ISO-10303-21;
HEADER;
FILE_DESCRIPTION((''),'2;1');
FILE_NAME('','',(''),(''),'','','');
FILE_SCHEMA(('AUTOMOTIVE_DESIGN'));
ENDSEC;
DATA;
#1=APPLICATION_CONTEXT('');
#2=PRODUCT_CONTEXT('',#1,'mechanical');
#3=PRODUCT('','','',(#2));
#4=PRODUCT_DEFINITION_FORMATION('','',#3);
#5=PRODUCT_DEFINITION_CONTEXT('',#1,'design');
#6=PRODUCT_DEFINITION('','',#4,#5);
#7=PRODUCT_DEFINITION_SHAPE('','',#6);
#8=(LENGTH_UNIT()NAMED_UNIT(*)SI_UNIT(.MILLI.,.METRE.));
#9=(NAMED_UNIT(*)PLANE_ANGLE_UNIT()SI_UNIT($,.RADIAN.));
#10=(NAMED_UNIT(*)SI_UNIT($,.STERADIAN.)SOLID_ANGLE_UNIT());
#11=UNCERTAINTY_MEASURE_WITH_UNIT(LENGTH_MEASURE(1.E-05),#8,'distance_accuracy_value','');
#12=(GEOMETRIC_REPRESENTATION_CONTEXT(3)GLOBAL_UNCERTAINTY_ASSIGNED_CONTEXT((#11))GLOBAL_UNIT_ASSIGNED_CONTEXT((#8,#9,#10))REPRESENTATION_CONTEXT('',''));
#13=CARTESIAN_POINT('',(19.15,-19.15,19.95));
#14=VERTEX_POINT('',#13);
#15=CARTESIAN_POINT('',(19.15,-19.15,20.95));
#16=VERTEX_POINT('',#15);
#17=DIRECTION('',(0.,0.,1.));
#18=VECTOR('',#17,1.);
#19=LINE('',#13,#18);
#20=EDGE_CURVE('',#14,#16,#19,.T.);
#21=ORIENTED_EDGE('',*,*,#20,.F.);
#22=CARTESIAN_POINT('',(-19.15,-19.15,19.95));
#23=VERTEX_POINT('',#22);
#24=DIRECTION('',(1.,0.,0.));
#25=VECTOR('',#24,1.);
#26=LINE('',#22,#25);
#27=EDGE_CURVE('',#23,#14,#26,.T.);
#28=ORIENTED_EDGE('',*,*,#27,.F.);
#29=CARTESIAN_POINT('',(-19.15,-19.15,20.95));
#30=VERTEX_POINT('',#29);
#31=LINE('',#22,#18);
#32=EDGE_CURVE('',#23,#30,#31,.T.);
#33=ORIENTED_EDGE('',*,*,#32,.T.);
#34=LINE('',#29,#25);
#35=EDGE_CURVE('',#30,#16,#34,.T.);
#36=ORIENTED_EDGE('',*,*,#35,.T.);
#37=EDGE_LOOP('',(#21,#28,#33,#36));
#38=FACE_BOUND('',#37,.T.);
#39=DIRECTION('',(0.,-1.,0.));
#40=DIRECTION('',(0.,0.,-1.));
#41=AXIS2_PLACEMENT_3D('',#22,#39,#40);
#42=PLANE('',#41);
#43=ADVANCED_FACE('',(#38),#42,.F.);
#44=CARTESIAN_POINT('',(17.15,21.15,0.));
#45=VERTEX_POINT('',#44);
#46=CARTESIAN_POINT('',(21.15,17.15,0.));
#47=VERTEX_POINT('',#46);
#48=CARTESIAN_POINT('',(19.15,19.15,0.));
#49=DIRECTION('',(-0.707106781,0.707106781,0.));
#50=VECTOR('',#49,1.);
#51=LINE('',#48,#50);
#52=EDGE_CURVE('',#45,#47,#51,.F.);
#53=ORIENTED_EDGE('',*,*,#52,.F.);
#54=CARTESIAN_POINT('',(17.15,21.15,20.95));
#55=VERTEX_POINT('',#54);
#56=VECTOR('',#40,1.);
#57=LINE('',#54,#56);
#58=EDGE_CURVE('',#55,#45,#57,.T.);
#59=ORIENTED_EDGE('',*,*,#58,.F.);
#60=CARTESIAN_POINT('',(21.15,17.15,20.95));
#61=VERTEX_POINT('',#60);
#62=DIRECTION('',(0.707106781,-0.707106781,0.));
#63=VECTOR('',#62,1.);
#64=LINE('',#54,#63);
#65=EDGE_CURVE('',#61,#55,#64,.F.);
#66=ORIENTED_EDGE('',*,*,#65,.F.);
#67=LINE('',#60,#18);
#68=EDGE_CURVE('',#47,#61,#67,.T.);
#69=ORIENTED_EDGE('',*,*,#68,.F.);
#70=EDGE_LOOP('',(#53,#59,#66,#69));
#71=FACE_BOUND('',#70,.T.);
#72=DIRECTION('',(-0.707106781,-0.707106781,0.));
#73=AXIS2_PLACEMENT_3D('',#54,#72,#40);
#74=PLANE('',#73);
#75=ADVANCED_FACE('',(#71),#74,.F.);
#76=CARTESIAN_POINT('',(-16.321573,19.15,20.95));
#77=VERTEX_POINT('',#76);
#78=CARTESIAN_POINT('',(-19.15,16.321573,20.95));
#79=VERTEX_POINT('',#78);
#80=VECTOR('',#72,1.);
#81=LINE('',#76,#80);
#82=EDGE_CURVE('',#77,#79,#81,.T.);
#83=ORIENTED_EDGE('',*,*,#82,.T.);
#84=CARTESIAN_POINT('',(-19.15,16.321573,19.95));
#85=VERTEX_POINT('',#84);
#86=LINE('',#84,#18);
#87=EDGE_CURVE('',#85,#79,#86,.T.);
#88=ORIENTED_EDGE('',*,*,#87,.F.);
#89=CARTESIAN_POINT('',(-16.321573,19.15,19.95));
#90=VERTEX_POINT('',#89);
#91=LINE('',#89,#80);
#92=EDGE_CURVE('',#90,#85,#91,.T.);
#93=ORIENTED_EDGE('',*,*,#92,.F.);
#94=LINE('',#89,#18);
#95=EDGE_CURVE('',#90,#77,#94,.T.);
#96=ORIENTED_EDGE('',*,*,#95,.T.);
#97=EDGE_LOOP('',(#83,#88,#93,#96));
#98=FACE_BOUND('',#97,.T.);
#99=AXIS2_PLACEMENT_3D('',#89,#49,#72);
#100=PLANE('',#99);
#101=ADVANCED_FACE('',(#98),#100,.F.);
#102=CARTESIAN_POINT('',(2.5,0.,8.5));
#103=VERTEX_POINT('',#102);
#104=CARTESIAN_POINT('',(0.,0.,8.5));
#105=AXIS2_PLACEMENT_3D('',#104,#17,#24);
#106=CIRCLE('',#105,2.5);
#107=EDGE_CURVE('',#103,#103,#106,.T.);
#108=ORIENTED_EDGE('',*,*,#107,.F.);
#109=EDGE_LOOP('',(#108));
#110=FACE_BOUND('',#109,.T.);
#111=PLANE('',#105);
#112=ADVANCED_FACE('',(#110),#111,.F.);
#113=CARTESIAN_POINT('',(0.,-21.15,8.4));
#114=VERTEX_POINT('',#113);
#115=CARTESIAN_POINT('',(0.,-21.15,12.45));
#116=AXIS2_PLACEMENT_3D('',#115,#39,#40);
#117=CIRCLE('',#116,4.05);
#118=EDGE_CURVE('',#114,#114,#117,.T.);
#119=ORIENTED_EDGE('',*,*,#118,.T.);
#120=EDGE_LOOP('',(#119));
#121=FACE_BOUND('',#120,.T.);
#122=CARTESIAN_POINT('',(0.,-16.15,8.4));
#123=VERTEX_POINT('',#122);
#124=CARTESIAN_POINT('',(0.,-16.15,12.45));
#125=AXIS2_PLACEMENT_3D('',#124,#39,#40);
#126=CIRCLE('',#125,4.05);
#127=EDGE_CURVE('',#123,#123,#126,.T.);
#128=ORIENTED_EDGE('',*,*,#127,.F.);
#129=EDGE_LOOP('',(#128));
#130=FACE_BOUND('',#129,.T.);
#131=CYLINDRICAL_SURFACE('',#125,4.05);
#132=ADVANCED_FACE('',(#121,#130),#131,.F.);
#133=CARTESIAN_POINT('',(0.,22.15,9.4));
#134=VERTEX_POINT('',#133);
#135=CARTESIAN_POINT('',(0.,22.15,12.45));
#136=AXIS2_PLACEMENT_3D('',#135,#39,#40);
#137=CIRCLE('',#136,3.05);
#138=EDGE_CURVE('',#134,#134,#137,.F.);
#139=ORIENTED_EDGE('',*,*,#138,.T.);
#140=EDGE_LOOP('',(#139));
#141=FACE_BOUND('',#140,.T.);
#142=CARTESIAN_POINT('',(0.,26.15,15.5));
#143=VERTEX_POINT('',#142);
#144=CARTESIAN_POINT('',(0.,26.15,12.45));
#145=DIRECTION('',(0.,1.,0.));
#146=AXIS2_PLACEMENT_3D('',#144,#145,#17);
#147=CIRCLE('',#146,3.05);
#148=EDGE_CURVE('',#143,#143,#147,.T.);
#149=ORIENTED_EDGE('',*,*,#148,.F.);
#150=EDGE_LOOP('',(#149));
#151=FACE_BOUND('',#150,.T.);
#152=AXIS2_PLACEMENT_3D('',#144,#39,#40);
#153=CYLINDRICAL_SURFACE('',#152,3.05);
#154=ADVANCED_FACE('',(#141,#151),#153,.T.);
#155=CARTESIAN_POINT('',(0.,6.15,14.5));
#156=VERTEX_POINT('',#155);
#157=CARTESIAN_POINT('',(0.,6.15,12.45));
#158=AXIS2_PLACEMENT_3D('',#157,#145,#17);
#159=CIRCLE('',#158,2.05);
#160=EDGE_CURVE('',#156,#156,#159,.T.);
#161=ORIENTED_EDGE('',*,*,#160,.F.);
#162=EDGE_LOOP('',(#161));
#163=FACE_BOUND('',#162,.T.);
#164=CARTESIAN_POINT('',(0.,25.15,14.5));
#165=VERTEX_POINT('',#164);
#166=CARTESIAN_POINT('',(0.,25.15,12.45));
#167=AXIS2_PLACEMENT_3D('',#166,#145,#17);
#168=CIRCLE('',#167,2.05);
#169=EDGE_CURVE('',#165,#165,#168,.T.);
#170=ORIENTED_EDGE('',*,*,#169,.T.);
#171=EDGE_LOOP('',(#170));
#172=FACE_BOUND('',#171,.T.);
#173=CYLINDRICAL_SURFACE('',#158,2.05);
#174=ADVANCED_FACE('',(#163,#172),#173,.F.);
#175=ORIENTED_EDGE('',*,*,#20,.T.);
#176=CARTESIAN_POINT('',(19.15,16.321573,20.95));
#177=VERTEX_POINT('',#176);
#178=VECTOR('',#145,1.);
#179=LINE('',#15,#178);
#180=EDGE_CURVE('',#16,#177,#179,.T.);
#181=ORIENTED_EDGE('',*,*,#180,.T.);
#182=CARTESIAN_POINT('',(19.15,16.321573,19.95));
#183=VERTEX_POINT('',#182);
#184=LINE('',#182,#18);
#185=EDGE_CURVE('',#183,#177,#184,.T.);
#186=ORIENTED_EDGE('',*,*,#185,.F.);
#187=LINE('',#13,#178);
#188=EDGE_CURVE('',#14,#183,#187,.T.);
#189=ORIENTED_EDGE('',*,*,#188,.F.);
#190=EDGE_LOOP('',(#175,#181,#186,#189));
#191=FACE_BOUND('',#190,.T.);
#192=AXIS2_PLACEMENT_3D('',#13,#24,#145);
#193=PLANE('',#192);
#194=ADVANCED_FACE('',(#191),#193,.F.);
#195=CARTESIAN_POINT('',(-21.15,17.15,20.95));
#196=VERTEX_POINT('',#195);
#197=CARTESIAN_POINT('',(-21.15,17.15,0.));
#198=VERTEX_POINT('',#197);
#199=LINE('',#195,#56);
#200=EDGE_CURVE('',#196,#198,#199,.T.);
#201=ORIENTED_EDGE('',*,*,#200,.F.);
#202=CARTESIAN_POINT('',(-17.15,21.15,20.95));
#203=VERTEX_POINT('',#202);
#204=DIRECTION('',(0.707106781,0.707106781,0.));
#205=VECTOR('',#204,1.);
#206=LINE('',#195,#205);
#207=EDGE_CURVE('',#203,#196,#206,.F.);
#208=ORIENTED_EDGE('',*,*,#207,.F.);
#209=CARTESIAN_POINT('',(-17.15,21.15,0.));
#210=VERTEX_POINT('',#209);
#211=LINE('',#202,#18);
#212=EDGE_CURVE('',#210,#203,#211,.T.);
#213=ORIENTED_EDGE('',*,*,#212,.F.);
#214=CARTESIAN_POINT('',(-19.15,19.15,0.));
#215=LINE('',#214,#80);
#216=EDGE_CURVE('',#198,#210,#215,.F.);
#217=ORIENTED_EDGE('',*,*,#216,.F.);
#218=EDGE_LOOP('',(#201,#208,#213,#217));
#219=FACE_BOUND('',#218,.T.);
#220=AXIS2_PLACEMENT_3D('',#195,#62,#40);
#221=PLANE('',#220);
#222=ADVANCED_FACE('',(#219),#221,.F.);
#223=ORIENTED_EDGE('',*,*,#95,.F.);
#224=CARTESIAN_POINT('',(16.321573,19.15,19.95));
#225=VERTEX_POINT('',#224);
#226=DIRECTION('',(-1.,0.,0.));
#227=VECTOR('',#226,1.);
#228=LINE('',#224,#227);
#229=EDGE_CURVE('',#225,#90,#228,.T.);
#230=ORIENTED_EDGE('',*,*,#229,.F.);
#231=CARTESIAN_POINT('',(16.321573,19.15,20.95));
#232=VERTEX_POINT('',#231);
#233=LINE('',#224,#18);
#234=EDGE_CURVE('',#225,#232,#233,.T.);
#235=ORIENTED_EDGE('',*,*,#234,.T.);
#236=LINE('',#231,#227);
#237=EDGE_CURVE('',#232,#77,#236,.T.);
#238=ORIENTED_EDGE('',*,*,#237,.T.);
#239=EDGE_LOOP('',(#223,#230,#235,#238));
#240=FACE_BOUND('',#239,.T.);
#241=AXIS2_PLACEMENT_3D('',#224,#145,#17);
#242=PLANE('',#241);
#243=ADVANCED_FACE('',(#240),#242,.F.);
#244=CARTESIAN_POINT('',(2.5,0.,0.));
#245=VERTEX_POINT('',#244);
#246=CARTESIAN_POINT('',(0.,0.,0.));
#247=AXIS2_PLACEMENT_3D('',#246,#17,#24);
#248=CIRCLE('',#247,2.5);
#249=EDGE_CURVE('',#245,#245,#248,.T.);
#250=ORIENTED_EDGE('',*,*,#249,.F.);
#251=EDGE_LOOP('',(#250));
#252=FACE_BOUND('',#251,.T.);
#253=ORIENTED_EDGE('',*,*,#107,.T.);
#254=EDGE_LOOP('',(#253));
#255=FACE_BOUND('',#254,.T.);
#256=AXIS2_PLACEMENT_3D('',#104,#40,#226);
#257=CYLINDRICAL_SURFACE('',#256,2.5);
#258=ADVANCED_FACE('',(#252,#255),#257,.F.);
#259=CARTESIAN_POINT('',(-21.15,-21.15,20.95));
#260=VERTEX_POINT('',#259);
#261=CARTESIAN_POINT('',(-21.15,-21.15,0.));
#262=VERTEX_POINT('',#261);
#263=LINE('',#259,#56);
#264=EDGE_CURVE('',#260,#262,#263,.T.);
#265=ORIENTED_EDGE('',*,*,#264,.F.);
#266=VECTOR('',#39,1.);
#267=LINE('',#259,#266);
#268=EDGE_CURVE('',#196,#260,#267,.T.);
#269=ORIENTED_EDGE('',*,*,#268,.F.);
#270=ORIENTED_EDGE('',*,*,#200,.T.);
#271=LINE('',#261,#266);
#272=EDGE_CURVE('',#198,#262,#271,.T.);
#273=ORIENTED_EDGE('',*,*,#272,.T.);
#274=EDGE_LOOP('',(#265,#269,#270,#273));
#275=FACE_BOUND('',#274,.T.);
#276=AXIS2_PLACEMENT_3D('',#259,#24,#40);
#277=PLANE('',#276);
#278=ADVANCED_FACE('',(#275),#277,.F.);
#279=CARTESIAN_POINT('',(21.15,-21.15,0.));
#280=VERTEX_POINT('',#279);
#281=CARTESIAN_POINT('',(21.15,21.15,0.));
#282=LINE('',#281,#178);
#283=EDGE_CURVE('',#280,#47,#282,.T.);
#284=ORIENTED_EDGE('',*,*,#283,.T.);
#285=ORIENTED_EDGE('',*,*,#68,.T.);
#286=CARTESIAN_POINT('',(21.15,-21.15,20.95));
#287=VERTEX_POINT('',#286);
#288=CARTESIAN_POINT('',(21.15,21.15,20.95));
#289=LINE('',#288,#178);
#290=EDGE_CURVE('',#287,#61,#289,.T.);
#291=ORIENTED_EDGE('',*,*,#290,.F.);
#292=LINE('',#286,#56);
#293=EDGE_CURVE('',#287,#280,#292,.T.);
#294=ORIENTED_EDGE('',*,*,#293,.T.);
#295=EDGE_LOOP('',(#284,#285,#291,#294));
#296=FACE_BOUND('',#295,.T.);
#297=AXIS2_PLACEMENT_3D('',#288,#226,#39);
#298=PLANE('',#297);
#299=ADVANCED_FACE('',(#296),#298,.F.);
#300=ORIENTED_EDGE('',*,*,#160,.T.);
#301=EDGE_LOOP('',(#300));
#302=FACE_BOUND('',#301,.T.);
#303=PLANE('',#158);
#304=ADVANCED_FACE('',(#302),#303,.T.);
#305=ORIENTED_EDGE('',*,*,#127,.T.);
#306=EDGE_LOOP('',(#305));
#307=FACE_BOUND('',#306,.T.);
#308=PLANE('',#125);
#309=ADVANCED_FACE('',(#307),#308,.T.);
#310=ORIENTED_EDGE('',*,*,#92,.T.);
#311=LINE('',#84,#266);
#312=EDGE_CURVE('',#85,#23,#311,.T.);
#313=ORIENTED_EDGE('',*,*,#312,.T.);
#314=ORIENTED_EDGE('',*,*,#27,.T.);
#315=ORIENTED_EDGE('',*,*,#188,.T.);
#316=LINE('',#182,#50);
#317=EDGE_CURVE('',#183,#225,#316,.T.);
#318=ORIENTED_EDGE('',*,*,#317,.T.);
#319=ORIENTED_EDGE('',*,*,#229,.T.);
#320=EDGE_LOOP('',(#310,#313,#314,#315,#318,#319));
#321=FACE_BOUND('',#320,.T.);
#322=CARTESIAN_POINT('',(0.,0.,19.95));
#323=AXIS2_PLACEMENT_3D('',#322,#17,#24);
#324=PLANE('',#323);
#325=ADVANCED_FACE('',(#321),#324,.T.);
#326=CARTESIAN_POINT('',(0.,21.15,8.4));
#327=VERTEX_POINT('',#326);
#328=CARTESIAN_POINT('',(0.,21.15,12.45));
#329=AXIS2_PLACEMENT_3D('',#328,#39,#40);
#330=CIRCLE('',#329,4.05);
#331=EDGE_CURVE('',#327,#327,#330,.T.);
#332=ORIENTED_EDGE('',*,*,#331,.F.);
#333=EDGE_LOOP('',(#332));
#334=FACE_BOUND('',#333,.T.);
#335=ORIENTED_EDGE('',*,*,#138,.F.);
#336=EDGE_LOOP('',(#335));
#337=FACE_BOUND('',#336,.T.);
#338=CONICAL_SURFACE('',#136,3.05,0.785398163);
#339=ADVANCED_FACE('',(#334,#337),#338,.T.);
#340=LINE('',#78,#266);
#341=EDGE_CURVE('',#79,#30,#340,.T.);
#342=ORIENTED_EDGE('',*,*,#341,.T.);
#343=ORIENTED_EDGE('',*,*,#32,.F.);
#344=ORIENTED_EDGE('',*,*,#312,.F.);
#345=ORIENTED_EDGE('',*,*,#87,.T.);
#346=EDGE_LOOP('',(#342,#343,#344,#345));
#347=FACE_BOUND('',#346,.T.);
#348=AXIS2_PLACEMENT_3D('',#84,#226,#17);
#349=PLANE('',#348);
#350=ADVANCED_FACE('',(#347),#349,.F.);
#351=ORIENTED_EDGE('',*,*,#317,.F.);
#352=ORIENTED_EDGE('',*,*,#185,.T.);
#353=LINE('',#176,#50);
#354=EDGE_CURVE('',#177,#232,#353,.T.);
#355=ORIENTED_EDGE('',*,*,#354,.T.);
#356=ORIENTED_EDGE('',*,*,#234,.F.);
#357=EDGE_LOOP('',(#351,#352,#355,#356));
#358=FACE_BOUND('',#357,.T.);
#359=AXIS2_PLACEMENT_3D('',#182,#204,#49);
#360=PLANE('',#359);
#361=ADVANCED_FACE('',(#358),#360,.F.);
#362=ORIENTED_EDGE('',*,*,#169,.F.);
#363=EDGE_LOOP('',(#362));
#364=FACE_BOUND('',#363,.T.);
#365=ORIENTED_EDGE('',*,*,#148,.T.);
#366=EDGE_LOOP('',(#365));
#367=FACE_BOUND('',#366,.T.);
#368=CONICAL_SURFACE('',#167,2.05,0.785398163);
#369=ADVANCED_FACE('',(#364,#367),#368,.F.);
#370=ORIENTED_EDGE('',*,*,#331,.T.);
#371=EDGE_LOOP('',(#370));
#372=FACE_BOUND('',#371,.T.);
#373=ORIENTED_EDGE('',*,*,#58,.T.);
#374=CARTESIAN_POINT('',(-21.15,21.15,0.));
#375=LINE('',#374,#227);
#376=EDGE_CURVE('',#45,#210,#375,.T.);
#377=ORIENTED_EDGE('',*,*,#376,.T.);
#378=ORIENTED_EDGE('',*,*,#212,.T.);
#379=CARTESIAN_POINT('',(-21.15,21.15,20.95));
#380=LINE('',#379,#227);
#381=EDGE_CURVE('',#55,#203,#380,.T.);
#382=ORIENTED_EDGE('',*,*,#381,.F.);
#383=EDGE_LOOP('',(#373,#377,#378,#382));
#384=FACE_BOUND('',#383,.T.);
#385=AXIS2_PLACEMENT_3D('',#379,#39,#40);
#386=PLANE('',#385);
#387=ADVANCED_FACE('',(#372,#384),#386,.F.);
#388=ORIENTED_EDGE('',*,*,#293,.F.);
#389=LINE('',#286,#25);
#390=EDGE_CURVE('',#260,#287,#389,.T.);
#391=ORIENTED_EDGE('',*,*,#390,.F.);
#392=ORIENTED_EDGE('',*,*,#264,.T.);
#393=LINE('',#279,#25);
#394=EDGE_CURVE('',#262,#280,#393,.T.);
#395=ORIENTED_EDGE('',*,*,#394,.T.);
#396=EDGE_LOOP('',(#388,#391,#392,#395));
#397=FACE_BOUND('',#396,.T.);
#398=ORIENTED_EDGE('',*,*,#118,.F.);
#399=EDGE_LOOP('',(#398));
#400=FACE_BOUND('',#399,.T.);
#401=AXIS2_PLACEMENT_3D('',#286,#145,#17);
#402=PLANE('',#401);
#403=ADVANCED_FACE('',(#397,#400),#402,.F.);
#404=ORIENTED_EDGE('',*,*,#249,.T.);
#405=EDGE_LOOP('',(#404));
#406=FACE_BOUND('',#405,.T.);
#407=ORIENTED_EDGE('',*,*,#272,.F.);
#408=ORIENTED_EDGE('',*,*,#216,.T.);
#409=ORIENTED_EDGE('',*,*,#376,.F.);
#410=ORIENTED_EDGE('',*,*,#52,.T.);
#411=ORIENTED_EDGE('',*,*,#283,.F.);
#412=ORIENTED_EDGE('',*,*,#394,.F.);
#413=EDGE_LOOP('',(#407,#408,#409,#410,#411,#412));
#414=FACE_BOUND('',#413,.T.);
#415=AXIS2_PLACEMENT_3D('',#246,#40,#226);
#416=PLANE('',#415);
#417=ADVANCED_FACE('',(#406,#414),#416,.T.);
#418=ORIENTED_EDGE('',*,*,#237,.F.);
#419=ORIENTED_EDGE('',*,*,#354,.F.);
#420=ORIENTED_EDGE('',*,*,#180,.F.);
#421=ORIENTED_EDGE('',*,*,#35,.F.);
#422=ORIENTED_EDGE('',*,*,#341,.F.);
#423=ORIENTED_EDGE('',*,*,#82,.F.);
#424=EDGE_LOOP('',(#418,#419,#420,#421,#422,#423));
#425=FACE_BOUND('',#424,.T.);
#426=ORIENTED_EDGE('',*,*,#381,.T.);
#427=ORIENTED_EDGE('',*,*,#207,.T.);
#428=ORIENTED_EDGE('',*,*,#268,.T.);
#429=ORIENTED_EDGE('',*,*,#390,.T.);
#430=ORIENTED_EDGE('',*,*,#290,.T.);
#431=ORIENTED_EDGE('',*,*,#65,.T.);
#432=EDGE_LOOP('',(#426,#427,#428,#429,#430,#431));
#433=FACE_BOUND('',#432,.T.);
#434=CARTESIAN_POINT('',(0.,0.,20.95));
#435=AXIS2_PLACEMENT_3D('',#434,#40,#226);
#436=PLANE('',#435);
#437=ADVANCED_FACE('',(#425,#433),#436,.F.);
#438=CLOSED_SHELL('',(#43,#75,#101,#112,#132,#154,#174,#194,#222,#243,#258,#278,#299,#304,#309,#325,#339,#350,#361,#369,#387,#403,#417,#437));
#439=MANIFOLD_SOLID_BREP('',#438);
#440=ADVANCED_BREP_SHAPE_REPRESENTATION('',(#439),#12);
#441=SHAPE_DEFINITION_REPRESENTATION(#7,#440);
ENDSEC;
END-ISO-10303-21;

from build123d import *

# Parameters (mm, degrees)
SKETCH3_W           = 42.3
SKETCH3_H           = 42.3
BOSS_EXTRUDE1_DEPTH = 20.95
SKETCH4_R           = 4.05
CUT_EXTRUDE1_DEPTH  = 5
SKETCH5_R           = 2.5
CUT_EXTRUDE2_DEPTH  = 8.5
SKETCH6_R           = 3.05
BOSS_EXTRUDE2_DEPTH = 5
SKETCH7_R           = 2.05
CUT_EXTRUDE3_DEPTH  = 20
CHAMFER1_SIZE       = 4
CHAMFER3_SIZE       = 1
CUT_EXTRUDE4_DEPTH  = 1


with BuildPart() as part:
    # Sketch3 → Boss-Extrude1 (new body)
    with BuildSketch(Plane.XY):
        Rectangle(SKETCH3_W, SKETCH3_H)
    extrude(amount=BOSS_EXTRUDE1_DEPTH)

    # Sketch4 → Cut-Extrude1 (cut)
    with BuildSketch(Plane.XZ.offset(21.15)):
        with Locations(Location((0, 12.45, 0), (0, 0, 270))):
            Circle(SKETCH4_R)
    extrude(amount=-CUT_EXTRUDE1_DEPTH, mode=Mode.SUBTRACT)

    # Sketch5 → Cut-Extrude2 (cut)
    with BuildSketch(Plane.XY):
        Circle(SKETCH5_R)
    extrude(amount=CUT_EXTRUDE2_DEPTH, mode=Mode.SUBTRACT)

    # Sketch6 → Boss-Extrude2 (add)
    with BuildSketch(Plane(origin=(0, 21.15, 0), x_dir=(1, 0, 0), z_dir=(0, 1, 0))):
        with Locations(Location((0, -12.45, 0), (0, 0, 90))):
            Circle(SKETCH6_R)
    extrude(amount=BOSS_EXTRUDE2_DEPTH)

    # Sketch7 → Cut-Extrude3 (cut)
    with BuildSketch(Plane(origin=(0, 26.15, 0), x_dir=(1, 0, 0), z_dir=(0, 1, 0))):
        with Locations(Location((0, -12.45, 0), (0, 0, 270))):
            Circle(SKETCH7_R)
    extrude(amount=-CUT_EXTRUDE3_DEPTH, mode=Mode.SUBTRACT)

    # Chamfer1
    chamfer1_edges = [part.edges().sort_by_distance(p)[0] for p in [
        (21.15, 21.15, 10.475),
        (-21.15, 21.15, 10.475),
    ]]
    chamfer(chamfer1_edges, length=CHAMFER1_SIZE)

    # Chamfer3
    chamfer3_edges = [part.edges().sort_by_distance(p)[0] for p in [
        (0, 21.15, 15.5),
        (0, 26.15, 10.4),
    ]]
    chamfer(chamfer3_edges, length=CHAMFER3_SIZE - 0.0001)  # a hair under: the kernel refuses the full size

    # Sketch10 → Cut-Extrude4 (cut)
    with BuildSketch(Plane.XY.offset(20.95)):
        Polygon((19.15, -19.15), (19.15, 16.321572875), (16.321572875, 19.15), (-16.321572875, 19.15), (-19.15, 16.321572875), (-19.15, -19.15), align=None)
    extrude(amount=-CUT_EXTRUDE4_DEPTH, mode=Mode.SUBTRACT)


solid = part.part
